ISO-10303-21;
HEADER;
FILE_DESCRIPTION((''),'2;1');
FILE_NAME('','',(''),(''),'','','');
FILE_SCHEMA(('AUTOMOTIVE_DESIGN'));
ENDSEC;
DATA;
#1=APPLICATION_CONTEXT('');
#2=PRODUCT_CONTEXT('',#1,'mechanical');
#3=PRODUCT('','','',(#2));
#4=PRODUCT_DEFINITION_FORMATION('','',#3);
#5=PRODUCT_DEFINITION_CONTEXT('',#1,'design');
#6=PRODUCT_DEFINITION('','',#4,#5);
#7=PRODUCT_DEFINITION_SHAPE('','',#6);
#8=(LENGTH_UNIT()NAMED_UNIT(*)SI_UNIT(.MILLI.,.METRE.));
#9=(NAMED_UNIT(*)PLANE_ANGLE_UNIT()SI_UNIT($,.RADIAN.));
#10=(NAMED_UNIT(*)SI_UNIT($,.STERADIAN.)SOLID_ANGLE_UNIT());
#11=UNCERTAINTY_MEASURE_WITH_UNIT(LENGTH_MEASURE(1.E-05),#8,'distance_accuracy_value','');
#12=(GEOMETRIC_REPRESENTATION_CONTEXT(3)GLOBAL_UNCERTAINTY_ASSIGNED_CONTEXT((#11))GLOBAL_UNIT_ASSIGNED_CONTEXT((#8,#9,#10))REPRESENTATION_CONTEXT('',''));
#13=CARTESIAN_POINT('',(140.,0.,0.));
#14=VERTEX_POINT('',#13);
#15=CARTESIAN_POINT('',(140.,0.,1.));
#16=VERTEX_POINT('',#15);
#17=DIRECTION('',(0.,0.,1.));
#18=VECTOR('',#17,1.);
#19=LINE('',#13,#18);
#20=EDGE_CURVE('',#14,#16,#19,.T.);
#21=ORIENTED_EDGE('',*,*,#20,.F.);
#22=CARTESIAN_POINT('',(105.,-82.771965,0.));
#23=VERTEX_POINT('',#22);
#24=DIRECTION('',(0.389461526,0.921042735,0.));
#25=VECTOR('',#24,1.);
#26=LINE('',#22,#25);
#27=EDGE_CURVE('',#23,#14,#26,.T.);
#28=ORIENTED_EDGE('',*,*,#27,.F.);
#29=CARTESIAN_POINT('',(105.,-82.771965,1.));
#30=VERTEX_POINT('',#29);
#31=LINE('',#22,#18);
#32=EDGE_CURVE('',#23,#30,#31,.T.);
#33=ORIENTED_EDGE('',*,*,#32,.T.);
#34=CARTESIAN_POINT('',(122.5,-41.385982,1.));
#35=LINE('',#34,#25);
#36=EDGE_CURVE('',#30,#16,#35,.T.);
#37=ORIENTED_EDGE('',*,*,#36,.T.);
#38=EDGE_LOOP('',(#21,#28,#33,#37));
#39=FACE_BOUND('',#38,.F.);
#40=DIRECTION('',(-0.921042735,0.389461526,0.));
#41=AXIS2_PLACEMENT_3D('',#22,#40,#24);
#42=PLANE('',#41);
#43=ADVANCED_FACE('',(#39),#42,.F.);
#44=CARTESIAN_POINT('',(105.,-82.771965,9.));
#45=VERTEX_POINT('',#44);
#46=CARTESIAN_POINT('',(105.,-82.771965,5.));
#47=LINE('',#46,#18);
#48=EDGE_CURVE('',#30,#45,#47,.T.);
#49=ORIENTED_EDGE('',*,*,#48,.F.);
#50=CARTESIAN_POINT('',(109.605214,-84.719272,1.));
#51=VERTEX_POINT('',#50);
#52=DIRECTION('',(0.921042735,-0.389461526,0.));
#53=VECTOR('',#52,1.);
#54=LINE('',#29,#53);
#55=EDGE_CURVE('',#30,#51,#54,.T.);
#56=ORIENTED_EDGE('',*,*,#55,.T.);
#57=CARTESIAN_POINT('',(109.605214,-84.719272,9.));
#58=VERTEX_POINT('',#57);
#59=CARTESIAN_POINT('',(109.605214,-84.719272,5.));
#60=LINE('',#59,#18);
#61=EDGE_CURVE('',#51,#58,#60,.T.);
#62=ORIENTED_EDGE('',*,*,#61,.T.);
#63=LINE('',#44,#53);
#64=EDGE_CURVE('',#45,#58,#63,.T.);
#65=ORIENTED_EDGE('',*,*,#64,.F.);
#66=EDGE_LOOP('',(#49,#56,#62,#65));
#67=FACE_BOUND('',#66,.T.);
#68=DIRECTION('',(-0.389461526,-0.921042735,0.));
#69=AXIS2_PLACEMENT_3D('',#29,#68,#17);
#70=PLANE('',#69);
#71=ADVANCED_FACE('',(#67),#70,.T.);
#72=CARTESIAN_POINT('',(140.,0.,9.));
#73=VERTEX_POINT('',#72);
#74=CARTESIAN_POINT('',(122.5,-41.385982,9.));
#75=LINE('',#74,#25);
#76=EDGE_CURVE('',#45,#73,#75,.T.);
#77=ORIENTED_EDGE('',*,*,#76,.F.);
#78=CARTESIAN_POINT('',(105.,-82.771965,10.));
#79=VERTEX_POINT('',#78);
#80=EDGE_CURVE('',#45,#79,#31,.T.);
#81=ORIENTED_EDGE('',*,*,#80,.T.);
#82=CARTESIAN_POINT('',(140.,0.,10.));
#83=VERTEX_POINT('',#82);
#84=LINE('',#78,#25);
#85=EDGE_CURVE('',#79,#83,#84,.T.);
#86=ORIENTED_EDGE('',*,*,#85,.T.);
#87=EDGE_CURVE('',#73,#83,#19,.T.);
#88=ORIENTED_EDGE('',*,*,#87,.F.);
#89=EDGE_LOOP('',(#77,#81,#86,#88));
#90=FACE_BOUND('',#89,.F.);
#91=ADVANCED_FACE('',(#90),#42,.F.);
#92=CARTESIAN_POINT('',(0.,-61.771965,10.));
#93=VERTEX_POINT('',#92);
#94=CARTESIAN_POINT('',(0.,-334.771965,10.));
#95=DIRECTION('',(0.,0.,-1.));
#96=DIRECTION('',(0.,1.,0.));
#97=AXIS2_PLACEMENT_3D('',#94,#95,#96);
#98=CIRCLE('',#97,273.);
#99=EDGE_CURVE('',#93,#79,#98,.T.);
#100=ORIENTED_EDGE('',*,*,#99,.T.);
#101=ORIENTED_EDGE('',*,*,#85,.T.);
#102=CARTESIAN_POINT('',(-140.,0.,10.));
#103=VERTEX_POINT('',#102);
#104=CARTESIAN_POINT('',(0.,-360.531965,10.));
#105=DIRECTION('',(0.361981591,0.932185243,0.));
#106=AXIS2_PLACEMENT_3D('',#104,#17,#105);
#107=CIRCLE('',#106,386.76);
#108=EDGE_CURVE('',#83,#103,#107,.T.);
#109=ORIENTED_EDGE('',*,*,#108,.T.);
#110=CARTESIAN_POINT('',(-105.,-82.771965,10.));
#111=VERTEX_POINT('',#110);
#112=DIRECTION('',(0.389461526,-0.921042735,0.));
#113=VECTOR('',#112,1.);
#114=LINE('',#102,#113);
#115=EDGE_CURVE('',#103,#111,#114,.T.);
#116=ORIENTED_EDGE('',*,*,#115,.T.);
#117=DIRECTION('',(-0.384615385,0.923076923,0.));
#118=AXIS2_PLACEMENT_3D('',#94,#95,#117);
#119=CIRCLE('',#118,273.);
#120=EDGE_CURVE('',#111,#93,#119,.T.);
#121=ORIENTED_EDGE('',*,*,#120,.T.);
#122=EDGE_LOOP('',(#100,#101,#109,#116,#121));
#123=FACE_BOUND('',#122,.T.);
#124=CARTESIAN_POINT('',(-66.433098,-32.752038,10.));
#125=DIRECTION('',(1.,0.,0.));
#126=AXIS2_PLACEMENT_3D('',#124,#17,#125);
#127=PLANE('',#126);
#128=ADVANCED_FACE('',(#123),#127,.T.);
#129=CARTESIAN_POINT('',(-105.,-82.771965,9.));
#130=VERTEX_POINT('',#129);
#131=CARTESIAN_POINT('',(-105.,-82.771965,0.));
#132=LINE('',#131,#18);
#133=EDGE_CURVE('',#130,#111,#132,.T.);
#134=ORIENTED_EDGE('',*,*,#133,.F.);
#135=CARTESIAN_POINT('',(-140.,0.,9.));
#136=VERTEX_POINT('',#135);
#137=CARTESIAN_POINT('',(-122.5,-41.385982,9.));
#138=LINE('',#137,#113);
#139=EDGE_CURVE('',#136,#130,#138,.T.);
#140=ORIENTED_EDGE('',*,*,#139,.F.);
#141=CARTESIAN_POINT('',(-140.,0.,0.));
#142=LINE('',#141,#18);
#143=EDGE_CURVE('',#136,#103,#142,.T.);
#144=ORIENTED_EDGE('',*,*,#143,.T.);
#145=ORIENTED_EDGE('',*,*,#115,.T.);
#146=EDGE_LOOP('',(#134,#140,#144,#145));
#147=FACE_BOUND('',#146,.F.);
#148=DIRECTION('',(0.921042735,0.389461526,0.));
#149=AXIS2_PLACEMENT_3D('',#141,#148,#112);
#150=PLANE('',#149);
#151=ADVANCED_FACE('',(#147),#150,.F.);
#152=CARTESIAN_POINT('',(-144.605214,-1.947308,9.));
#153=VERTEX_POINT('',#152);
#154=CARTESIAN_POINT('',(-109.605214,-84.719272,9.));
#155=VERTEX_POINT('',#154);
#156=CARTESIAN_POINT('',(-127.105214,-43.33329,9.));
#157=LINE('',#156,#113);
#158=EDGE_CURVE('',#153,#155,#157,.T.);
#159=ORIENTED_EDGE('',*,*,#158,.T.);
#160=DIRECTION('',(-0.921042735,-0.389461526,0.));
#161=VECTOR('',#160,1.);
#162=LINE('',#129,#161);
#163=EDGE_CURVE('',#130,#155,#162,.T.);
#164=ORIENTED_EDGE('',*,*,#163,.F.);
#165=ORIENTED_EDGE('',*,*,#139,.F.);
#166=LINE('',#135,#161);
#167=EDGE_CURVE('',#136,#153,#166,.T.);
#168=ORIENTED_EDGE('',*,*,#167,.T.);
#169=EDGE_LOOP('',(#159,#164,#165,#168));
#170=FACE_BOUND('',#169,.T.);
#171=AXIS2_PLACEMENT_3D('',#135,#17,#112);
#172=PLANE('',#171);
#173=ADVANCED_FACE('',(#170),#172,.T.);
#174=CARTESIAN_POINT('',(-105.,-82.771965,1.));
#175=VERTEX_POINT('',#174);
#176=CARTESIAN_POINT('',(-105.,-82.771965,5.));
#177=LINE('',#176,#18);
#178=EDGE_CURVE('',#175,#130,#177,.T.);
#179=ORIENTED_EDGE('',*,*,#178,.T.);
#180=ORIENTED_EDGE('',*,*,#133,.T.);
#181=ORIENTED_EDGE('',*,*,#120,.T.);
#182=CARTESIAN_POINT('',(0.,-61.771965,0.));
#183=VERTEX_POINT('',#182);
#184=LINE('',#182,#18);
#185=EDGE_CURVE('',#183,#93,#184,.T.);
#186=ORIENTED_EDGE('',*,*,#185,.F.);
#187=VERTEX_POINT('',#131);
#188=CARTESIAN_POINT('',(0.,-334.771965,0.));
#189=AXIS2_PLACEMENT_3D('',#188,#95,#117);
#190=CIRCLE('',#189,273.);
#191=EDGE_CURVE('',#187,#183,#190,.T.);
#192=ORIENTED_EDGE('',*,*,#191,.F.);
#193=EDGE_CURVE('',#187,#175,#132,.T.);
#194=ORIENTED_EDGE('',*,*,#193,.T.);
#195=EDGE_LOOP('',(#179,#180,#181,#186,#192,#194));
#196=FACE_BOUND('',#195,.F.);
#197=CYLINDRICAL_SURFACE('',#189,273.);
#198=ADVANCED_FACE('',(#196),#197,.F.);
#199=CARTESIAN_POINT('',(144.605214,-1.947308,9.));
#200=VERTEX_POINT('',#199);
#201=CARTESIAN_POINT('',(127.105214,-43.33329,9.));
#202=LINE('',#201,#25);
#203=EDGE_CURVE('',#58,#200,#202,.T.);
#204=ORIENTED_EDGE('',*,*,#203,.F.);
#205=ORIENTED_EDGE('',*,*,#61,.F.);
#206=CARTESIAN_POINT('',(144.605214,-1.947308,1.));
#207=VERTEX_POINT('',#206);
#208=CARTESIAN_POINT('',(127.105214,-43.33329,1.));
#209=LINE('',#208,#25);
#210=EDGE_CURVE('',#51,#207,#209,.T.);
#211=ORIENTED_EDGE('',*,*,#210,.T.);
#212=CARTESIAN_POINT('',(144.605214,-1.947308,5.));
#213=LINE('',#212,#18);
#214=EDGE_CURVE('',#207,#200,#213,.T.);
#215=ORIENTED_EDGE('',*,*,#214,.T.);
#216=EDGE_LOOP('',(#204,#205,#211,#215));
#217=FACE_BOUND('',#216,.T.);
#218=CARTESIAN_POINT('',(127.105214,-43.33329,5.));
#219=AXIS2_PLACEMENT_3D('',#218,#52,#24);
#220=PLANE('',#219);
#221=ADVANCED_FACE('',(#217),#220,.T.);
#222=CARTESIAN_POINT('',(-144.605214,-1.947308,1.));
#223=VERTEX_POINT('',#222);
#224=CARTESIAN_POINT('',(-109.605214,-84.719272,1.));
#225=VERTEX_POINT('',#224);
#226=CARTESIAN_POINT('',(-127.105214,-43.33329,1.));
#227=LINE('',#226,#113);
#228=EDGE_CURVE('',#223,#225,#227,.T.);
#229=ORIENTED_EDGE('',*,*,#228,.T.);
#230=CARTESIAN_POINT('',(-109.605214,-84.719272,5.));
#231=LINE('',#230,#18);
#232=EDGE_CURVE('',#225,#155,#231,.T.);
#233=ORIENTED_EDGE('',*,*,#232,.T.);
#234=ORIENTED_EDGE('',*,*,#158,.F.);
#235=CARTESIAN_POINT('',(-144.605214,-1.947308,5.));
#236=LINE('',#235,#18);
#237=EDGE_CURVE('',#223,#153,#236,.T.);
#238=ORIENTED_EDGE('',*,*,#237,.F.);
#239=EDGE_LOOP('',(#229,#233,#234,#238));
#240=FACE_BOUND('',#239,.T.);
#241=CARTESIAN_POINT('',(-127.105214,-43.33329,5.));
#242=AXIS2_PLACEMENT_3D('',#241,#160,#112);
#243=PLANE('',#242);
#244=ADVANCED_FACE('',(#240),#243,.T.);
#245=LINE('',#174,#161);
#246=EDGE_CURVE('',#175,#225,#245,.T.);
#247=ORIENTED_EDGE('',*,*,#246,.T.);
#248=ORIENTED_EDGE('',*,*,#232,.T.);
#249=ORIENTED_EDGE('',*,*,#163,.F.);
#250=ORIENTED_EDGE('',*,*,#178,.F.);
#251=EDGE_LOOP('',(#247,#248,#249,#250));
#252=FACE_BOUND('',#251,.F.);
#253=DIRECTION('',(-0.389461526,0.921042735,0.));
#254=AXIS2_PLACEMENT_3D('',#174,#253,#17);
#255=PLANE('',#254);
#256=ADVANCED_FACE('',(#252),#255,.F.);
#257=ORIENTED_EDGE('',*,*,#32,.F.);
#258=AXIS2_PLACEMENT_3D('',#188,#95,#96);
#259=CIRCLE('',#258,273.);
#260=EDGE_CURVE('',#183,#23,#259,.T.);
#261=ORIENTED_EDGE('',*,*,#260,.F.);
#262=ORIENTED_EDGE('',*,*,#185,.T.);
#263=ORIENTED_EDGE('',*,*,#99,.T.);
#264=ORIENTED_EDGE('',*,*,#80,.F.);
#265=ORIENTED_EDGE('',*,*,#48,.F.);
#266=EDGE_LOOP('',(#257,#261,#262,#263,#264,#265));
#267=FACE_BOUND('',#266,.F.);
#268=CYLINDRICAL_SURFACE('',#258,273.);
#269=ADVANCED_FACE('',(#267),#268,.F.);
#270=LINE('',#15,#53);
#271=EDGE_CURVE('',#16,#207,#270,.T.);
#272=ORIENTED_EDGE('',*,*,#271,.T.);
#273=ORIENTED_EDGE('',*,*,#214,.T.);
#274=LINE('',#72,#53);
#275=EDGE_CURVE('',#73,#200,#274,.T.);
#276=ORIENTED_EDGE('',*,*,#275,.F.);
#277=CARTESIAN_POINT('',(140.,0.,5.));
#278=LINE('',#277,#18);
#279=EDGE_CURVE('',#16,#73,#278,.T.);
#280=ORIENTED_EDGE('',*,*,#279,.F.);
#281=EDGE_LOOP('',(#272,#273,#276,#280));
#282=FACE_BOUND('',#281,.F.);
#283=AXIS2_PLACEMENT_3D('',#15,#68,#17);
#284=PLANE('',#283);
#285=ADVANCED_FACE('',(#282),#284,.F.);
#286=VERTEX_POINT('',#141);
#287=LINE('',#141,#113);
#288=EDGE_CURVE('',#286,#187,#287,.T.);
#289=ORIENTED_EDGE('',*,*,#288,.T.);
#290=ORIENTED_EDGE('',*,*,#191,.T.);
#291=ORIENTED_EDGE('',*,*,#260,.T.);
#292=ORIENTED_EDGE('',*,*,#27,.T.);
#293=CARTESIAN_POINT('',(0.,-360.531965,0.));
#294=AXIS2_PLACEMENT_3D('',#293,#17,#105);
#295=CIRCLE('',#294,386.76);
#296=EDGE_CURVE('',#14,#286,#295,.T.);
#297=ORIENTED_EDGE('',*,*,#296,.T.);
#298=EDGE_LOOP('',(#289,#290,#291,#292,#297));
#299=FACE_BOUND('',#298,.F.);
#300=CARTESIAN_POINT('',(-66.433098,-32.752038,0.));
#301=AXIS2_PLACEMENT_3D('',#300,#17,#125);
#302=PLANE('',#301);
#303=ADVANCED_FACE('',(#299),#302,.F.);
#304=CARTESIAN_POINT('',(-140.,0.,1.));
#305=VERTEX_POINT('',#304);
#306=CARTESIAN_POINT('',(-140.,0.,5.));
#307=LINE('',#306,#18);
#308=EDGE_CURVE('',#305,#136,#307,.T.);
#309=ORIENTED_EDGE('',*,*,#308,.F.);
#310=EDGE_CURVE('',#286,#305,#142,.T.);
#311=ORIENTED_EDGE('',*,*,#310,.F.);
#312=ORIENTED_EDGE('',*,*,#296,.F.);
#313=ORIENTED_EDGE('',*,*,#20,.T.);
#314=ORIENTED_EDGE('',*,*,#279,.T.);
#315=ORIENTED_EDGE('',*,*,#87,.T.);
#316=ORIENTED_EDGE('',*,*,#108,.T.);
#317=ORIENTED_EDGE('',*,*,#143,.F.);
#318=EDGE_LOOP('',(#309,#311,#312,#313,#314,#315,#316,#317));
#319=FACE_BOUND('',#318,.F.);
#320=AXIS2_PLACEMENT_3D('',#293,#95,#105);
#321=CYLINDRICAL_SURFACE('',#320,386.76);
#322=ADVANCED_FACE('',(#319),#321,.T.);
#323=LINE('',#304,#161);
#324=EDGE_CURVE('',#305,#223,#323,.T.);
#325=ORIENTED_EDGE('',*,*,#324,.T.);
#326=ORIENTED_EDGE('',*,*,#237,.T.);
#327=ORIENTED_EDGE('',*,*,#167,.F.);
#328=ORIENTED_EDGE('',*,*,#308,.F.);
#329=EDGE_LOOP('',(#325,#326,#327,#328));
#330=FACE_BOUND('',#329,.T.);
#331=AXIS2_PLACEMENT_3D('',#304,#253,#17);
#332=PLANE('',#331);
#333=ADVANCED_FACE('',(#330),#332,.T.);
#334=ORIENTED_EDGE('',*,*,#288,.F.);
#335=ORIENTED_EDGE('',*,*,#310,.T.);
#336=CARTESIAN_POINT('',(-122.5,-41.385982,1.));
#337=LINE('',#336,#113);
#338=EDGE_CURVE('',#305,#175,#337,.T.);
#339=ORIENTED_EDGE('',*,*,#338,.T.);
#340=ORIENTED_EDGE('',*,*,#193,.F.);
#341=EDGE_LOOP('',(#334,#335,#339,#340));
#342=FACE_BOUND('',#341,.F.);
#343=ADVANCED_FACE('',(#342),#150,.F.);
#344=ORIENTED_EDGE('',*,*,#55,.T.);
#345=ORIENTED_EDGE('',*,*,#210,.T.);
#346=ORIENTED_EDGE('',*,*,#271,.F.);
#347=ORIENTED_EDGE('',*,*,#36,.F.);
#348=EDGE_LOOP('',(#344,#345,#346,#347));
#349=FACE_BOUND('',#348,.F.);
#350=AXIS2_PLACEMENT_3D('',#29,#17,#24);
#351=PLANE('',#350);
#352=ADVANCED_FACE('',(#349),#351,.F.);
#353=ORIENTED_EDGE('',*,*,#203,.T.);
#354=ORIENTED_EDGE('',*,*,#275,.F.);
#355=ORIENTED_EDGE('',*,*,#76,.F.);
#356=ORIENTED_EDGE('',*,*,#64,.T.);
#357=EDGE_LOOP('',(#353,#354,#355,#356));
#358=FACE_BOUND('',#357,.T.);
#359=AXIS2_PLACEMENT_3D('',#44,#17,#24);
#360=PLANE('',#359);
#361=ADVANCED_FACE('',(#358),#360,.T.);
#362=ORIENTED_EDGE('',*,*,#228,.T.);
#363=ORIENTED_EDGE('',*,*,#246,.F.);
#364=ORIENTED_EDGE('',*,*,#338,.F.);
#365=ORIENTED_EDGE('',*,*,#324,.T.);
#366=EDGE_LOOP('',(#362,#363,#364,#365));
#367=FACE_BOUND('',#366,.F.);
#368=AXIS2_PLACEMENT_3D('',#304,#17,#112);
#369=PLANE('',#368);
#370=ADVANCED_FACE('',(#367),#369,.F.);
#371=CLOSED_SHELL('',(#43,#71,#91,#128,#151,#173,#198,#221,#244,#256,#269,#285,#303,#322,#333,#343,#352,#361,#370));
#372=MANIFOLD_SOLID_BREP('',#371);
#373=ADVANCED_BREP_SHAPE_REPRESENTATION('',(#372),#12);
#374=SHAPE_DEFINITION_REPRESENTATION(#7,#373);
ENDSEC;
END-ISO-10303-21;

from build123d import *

# Parameters (mm, degrees)
F1_DEPTH = 10
F2_W     = 89.8676701995
F2_H     = 8
F3_DEPTH = 5
F4_W     = 89.8676701995
F4_H     = 8
F5_DEPTH = 5


# Not quite as in the source:
# - a feature names something its author has since deleted; it is built from what else it names


with BuildPart() as f1:
    # F0 (on Top) → F1 (new body)
    with BuildSketch(Plane.XY):
        with BuildLine():
            Line((0, 0), (-140, 0))
            Line((-140, 0), (-105, -82.771964741))
            ThreePointArc((-105, -82.771964741), (-53.5397048927, -67.0734402774), (0, -61.771964741))
            Line((0, -61.771964741), (0, 0))
        make_face()
        with BuildLine():
            Line((140, 0), (0, 0))
            Line((0, 0), (0, -61.771964741))
            ThreePointArc((0, -61.771964741), (53.5397048927, -67.0734402774), (105, -82.771964741))
            Line((105, -82.771964741), (140, 0))
        make_face()
        with BuildLine():
            ThreePointArc((0, 26.228035259), (-71.217817001, 19.6144809107), (-140, 0))
            Line((-140, 0), (0, 0))
            Line((0, 0), (0, 26.228035259))
        make_face()
        with BuildLine():
            Line((0, 26.228035259), (0, 0))
            Line((0, 0), (140, 0))
            ThreePointArc((140, 0), (71.217817001, 19.6144809107), (0, 26.228035259))
        make_face()
    extrude(amount=F1_DEPTH)

    # F2 (on face) → F3 (join)
    with BuildSketch(Plane(origin=(118.7647607356, -50.2194993045, 0), x_dir=(0.3894615263, 0.9210427349, 0), z_dir=(0.9210427349, -0.3894615263, 0))):
        with Locations((9.5907785808, 5)):
            Rectangle(F2_W, F2_H)
    extrude(amount=F3_DEPTH)

    # F4 (on face) → F5 (join)
    with BuildSketch(Plane(origin=(-118.7647607356, -50.2194993045, 0), x_dir=(0.3894615263, -0.9210427349, 0), z_dir=(-0.9210427349, -0.3894615263, 0))):
        with Locations((-9.5907785808, 5)):
            Rectangle(F4_W, F4_H)
    extrude(amount=F5_DEPTH)


solid = f1.part
